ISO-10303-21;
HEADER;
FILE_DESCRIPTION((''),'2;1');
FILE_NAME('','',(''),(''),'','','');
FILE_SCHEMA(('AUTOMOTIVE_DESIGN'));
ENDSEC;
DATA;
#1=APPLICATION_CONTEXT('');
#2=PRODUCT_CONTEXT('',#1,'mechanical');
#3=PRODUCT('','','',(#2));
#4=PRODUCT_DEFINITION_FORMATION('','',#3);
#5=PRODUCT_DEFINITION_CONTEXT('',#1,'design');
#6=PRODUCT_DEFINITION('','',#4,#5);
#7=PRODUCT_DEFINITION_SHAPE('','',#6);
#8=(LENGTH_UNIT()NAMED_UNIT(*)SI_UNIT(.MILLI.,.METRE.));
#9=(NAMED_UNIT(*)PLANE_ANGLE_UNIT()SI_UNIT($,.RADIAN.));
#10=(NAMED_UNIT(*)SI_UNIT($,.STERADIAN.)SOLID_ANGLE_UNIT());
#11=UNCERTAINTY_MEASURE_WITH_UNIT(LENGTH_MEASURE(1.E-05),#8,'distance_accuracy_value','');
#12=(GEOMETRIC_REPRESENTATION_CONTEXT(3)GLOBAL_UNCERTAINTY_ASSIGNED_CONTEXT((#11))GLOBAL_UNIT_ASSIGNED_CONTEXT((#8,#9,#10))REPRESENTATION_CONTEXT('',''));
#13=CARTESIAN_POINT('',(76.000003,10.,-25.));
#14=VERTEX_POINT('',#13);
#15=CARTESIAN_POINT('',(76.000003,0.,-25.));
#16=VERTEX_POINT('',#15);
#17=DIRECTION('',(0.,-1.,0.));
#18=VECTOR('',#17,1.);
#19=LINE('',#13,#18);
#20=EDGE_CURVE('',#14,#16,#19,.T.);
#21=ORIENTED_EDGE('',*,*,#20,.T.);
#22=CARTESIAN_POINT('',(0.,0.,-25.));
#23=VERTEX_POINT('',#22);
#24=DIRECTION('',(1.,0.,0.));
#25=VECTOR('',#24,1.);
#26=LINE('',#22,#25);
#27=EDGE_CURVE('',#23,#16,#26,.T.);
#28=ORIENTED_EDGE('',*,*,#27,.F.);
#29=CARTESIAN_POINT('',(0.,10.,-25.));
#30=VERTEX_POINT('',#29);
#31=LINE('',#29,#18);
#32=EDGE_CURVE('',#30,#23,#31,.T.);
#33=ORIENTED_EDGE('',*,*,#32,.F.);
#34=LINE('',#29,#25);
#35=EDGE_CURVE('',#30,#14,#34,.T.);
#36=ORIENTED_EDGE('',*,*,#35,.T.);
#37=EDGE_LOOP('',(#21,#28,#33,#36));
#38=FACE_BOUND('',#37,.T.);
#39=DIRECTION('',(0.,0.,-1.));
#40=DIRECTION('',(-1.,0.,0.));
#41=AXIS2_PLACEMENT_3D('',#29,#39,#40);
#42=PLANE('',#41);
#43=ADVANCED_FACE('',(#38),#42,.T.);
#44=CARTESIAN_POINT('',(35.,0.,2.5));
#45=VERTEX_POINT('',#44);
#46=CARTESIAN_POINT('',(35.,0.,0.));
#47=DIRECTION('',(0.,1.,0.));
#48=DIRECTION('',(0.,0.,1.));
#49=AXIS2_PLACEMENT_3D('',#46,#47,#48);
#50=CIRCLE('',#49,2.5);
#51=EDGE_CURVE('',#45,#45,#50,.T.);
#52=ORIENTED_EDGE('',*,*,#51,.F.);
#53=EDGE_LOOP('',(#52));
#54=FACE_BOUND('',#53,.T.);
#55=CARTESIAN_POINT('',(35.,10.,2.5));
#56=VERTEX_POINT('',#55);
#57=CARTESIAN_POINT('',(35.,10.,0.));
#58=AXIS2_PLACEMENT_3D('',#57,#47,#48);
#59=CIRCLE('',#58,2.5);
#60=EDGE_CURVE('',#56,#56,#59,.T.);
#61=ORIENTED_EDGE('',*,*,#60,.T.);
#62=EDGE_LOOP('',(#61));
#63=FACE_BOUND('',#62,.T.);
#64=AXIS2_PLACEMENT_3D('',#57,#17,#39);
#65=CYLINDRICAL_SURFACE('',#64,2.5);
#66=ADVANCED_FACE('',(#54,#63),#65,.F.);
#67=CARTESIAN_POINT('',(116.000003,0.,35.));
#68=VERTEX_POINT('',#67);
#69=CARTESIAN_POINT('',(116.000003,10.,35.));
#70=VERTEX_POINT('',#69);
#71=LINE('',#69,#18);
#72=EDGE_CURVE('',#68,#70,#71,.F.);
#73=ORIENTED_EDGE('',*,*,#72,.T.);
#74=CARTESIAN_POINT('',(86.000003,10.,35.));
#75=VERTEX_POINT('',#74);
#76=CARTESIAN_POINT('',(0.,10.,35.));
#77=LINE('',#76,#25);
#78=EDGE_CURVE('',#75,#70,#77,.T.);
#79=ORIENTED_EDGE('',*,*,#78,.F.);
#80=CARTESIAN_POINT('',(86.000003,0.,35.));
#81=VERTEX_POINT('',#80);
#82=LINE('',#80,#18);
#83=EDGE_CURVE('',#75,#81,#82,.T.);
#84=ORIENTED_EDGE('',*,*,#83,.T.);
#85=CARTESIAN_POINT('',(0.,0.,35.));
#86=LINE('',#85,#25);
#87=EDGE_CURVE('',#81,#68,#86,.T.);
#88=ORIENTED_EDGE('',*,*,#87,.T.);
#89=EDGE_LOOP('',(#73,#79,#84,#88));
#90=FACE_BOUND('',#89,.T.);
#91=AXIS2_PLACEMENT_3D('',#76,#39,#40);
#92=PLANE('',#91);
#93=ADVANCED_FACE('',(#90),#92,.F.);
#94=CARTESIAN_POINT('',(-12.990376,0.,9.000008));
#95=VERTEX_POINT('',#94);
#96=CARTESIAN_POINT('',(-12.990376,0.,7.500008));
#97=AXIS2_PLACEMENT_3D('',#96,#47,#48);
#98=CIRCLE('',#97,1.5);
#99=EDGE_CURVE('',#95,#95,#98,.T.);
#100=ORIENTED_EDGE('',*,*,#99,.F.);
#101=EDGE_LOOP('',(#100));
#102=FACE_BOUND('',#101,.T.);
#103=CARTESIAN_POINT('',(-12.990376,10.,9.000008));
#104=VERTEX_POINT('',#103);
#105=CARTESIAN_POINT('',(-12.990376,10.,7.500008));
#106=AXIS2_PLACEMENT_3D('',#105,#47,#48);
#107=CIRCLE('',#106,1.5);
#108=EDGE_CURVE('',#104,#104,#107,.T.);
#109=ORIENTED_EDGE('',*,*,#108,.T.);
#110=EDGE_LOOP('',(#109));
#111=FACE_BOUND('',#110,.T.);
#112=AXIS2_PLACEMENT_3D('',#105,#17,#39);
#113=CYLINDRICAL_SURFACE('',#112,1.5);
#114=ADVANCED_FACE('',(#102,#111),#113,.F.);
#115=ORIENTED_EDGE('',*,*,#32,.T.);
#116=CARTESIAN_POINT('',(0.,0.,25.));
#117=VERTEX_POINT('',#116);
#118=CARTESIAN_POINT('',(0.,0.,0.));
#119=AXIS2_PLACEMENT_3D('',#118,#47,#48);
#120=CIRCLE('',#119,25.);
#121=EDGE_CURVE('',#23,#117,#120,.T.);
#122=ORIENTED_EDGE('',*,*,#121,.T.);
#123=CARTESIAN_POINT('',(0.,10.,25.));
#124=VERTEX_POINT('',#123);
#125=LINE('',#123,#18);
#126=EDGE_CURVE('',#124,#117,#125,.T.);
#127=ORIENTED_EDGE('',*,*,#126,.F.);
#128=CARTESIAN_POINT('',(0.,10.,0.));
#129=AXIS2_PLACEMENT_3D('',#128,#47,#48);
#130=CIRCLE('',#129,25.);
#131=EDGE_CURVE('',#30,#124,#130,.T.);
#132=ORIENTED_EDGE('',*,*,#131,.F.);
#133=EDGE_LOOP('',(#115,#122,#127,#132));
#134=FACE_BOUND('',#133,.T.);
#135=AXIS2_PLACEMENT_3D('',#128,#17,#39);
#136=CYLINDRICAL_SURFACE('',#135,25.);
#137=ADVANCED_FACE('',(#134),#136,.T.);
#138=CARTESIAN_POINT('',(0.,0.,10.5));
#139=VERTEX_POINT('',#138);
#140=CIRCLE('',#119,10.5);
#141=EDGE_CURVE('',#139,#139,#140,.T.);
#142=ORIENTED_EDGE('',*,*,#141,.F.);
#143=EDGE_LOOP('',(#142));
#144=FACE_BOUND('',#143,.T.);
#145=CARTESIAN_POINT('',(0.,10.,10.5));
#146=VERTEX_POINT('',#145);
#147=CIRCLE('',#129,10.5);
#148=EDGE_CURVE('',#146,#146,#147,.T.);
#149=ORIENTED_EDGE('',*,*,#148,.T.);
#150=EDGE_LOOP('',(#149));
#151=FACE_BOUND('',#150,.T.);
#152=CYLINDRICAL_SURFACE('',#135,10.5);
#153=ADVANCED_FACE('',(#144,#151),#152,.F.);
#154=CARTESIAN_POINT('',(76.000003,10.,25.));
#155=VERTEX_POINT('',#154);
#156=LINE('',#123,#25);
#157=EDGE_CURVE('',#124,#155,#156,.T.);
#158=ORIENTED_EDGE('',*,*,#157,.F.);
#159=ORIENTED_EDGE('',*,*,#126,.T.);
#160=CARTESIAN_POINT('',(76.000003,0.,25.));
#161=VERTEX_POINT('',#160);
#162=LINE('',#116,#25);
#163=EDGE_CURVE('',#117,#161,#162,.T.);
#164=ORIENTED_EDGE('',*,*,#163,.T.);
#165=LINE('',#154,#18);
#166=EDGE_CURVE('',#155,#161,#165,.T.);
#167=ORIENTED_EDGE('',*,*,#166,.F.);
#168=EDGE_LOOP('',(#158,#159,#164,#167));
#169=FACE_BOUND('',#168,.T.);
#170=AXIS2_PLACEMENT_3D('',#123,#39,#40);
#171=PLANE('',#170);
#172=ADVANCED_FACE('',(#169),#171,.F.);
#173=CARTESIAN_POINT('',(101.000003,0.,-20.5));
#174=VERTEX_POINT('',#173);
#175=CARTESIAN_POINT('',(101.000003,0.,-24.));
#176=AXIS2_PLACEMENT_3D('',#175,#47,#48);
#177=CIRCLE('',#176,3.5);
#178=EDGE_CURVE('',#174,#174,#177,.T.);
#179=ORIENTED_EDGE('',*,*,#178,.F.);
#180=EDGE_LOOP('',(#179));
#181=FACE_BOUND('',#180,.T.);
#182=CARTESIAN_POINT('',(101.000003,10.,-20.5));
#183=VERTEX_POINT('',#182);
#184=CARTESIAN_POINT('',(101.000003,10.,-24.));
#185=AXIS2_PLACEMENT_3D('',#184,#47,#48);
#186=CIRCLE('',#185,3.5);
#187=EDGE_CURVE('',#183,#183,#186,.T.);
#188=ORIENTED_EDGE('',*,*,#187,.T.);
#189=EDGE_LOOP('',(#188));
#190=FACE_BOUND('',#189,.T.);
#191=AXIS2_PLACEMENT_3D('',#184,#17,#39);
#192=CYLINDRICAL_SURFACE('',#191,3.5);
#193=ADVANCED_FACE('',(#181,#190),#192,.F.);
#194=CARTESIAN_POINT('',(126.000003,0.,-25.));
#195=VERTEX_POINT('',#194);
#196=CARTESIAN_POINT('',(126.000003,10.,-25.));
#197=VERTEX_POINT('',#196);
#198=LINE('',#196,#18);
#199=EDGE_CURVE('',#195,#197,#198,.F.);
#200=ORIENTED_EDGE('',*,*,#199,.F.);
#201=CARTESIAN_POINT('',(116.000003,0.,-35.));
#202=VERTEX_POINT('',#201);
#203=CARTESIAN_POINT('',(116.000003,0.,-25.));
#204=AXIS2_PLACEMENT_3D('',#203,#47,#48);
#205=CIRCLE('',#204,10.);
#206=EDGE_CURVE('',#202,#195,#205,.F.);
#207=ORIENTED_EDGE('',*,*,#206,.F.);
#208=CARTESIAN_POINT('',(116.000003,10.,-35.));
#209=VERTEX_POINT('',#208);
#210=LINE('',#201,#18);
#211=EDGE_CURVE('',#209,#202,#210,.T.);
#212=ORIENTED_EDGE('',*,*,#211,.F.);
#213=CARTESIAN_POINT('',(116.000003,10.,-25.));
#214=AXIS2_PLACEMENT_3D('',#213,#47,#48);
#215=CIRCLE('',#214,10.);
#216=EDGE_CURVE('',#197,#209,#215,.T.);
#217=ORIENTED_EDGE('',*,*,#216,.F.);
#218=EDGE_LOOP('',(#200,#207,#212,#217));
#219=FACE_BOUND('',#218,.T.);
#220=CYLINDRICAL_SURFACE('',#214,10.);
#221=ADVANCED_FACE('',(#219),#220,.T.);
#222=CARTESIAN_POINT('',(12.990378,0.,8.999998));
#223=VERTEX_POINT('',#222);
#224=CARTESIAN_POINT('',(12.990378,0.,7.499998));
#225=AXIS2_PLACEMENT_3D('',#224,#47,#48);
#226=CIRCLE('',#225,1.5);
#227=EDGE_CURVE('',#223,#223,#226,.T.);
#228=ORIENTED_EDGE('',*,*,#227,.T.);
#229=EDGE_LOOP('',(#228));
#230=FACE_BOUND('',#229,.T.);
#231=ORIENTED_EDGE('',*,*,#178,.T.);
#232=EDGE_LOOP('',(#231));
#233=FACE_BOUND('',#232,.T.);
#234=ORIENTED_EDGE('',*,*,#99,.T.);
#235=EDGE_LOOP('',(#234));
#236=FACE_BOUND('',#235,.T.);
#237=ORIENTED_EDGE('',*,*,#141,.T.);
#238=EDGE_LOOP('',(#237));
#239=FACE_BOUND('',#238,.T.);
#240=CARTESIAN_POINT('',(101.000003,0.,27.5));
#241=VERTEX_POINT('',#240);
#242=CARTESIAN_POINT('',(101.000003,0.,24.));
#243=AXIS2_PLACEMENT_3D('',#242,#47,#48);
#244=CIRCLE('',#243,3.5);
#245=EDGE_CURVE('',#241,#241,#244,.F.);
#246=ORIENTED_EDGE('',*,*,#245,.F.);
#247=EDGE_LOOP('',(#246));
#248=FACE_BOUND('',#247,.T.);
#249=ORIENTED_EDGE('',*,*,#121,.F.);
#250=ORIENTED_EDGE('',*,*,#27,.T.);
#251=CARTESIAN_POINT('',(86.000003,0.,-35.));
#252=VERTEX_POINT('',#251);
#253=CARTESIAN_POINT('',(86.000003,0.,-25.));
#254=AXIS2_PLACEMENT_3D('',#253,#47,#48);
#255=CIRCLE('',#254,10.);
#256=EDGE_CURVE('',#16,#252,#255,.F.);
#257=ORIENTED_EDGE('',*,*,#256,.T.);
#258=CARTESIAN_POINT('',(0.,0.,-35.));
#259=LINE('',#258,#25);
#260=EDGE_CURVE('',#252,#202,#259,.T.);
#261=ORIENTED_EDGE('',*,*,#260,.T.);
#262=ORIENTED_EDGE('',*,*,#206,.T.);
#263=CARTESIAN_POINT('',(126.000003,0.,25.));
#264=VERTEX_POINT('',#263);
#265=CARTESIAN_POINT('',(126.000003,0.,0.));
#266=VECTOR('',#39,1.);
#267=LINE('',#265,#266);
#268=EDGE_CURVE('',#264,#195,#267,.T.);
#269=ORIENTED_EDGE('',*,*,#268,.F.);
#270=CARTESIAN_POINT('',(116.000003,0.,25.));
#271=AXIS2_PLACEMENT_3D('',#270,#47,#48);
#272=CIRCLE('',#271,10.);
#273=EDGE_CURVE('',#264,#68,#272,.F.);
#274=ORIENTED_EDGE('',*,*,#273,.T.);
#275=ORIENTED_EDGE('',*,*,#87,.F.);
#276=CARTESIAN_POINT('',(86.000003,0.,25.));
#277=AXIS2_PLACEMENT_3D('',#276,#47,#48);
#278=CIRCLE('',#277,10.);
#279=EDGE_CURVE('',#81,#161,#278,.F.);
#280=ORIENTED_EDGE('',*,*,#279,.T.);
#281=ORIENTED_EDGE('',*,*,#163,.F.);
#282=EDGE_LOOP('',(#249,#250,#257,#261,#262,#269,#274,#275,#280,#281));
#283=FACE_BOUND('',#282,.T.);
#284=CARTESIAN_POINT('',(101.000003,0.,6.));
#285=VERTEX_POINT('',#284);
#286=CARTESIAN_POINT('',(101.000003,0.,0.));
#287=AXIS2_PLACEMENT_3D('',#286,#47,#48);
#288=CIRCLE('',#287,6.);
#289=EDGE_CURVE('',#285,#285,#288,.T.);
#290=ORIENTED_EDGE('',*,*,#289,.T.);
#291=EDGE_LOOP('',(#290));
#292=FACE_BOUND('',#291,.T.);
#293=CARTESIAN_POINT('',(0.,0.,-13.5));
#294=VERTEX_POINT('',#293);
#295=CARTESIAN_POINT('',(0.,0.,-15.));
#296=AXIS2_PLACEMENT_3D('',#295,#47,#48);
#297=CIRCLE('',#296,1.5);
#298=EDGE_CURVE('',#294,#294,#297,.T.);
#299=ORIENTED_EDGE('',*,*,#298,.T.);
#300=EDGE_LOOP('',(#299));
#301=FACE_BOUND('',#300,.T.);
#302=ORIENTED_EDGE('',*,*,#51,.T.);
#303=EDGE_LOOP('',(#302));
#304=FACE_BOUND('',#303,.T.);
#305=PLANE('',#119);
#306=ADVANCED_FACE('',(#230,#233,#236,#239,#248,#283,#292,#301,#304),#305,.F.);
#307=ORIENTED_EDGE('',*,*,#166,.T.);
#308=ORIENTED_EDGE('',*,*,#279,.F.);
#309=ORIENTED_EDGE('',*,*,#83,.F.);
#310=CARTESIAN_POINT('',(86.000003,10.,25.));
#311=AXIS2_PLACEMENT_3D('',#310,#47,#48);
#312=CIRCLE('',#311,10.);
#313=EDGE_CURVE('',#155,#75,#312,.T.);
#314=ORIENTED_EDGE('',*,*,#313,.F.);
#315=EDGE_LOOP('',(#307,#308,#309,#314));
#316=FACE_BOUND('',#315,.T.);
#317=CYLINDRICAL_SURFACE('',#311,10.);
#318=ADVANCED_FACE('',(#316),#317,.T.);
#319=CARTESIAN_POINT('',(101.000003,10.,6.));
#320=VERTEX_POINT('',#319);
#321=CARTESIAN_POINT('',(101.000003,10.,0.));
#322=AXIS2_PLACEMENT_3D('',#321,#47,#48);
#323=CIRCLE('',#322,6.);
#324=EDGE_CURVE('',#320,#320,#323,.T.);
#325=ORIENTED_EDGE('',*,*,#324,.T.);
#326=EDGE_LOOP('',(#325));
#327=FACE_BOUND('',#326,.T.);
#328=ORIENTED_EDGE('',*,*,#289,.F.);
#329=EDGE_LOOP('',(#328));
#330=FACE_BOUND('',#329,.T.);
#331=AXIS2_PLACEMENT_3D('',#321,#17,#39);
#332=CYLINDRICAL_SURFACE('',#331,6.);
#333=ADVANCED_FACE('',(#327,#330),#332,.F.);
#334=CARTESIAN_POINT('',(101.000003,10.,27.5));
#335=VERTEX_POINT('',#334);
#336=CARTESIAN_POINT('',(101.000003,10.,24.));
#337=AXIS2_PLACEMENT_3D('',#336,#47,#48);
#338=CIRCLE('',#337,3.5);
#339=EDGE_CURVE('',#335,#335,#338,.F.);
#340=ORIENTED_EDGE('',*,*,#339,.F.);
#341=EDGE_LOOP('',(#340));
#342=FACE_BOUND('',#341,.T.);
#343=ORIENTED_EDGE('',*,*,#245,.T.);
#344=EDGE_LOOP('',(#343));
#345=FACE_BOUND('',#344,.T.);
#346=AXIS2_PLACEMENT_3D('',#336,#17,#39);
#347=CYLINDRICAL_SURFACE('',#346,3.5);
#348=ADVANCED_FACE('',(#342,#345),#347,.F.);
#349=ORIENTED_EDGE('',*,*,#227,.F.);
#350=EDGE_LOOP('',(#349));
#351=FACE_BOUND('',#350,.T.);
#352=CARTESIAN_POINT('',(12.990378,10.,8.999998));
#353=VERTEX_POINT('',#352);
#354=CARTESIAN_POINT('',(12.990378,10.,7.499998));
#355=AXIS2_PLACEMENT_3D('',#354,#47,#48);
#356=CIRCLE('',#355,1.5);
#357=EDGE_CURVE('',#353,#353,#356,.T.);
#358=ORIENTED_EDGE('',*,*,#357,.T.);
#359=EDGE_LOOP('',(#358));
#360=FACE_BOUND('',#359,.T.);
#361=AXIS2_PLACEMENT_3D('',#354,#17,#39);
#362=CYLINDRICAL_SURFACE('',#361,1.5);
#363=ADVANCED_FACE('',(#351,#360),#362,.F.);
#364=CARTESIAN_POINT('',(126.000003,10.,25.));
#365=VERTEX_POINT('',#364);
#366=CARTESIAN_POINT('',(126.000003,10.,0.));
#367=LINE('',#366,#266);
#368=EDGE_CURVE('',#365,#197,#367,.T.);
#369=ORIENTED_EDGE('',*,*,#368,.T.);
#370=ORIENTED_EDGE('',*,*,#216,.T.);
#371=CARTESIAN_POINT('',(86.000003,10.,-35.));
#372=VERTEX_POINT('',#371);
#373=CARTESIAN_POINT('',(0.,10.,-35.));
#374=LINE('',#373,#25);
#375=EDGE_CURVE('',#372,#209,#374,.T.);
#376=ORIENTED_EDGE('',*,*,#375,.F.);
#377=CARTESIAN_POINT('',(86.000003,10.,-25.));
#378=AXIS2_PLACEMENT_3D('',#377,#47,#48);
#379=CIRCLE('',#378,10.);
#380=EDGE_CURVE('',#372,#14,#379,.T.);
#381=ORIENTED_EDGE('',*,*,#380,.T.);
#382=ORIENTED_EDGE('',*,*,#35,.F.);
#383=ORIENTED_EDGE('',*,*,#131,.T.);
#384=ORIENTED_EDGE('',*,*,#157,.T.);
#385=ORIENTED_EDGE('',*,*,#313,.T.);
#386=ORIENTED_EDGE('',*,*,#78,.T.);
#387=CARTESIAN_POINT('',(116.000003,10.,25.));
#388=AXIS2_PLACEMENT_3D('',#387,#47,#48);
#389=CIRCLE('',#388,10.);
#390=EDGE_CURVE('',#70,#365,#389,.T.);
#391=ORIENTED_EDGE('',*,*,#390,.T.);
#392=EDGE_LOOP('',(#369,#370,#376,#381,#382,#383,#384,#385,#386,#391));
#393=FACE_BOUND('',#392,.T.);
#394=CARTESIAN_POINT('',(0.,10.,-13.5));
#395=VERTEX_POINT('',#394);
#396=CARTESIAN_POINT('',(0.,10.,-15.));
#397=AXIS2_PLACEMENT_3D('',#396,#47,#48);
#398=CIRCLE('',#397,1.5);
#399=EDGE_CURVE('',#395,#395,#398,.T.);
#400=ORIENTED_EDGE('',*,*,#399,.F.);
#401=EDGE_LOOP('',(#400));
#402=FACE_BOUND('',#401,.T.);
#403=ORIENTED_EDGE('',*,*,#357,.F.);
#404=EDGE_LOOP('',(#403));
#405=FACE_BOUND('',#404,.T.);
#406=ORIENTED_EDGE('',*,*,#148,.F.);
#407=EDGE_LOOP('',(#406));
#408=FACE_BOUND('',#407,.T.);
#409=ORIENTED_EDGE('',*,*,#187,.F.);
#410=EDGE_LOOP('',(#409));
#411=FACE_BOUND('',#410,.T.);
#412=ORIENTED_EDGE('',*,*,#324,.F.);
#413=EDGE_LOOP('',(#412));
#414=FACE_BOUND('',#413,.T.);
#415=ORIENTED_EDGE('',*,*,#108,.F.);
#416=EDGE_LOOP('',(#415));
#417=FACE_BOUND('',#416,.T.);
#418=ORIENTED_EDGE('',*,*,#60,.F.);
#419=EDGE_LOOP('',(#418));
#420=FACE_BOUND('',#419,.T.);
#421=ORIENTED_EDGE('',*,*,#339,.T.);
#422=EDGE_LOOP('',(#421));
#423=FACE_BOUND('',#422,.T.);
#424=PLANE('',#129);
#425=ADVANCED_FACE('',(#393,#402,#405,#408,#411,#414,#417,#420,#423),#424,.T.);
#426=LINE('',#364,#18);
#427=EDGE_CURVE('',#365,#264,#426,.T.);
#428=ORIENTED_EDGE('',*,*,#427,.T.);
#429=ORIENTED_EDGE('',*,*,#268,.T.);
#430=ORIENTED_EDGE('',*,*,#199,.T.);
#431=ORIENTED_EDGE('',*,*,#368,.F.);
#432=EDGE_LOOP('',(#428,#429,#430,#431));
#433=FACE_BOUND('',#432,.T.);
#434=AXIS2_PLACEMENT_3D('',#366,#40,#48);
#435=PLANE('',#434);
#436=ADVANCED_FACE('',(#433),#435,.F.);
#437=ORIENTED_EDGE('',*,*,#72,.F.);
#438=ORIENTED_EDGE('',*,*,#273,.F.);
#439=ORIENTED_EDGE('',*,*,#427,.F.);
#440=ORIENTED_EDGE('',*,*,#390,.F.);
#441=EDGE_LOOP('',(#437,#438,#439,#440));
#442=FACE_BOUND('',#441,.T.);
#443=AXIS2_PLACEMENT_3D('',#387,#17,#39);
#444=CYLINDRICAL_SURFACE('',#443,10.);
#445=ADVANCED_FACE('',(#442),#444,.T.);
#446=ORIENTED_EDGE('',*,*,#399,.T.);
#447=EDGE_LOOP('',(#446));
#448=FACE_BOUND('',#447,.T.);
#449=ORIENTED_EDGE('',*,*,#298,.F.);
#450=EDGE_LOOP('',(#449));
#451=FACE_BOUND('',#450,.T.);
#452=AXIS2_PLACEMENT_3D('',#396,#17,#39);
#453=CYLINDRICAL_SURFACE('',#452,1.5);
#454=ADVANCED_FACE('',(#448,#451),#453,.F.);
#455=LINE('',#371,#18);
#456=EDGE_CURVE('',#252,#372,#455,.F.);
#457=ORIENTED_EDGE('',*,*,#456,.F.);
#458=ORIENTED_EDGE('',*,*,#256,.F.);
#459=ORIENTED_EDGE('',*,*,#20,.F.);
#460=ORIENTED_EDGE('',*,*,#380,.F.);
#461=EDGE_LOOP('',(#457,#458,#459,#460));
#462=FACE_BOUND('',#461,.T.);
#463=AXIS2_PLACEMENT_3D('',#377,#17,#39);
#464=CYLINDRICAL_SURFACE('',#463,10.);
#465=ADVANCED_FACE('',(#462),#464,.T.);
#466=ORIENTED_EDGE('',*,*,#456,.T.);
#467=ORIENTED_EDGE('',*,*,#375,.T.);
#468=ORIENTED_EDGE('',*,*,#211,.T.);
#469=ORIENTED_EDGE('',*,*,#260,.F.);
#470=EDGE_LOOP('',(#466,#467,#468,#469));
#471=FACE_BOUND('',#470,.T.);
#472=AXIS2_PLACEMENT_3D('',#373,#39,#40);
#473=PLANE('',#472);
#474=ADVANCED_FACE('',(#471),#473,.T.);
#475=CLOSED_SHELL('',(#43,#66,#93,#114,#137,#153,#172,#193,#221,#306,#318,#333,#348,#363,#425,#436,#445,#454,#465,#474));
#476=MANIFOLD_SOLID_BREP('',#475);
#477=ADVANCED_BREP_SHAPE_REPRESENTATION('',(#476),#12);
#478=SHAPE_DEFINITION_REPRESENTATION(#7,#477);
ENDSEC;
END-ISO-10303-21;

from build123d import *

# Parameters (mm, degrees)
SKETCH1_R           = 3.5
SKETCH1_R_2         = 6
SKETCH1_R_3         = 2.5
SKETCH1_R_4         = 1.5
SKETCH1_R_5         = 10.5
BOSS_EXTRUDE1_DEPTH = 10
FILLET1_R           = 10
FILLET2_R           = 10
FILLET3_R           = 10
FILLET4_R           = 10


with BuildPart() as part:
    # Sketch1 → Boss-Extrude1 (new body)
    with BuildSketch(Plane(origin=(0, 0, 0), x_dir=(1, 0, 0), z_dir=(0, 1, 0))):
        with BuildLine():
            Line((76.000002703, -25), (76.000002703, -35))
            Line((76.000002703, -35), (126.000002703, -35))
            Line((126.000002703, -35), (126.000002703, 35))
            Line((126.000002703, 35), (76.000002703, 35))
            Line((76.000002703, 35), (76.000002703, 25))
            Line((76.000002703, 25), (0, 25))
            ThreePointArc((0, 25), (-25, 0), (0, -25))
            Line((0, -25), (76.000002703, -25))
        make_face()
        with Locations(Location((101.000002703, 24, 0), (0, 0, 270))):
            Circle(SKETCH1_R, mode=Mode.SUBTRACT)
        with Locations(Location((101.000002703, -24, 0), (0, 0, 270))):
            Circle(SKETCH1_R, mode=Mode.SUBTRACT)
        with Locations(Location((101.000002703, 0, 0), (0, 0, 270))):
            Circle(SKETCH1_R_2, mode=Mode.SUBTRACT)
        with Locations(Location((35, 0, 0), (0, 0, 270))):
            Circle(SKETCH1_R_3, mode=Mode.SUBTRACT)
        with Locations(Location((0, 15, 0), (0, 0, 270))):
            Circle(SKETCH1_R_4, mode=Mode.SUBTRACT)
        with Locations(Location((12.990377534, -7.499997966, 0), (0, 0, 270))):
            Circle(SKETCH1_R_4, mode=Mode.SUBTRACT)
        with Locations(Location((-12.990376356, -7.500008143, 0), (0, 0, 270))):
            Circle(SKETCH1_R_4, mode=Mode.SUBTRACT)
        with Locations(Location((0, 0, 0), (0, 0, 270))):
            Circle(SKETCH1_R_5, mode=Mode.SUBTRACT)
    extrude(amount=BOSS_EXTRUDE1_DEPTH)

    # Fillet1
    fillet1_edges = [part.edges().sort_by_distance(p)[0] for p in [
        (126.000002703, 5, 35),
    ]]
    fillet(fillet1_edges, radius=FILLET1_R)

    # Fillet2
    fillet2_edges = [part.edges().sort_by_distance(p)[0] for p in [
        (76.000002703, 5, 35),
    ]]
    fillet(fillet2_edges, radius=FILLET2_R - 0.0001)  # a hair under: the kernel refuses the full size

    # Fillet3
    fillet3_edges = [part.edges().sort_by_distance(p)[0] for p in [
        (76.000002703, 5, -35),
    ]]
    fillet(fillet3_edges, radius=FILLET3_R - 0.0001)  # a hair under: the kernel refuses the full size

    # Fillet4
    fillet4_edges = [part.edges().sort_by_distance(p)[0] for p in [
        (126.000002703, 5, -35),
    ]]
    fillet(fillet4_edges, radius=FILLET4_R)


solid = part.part
